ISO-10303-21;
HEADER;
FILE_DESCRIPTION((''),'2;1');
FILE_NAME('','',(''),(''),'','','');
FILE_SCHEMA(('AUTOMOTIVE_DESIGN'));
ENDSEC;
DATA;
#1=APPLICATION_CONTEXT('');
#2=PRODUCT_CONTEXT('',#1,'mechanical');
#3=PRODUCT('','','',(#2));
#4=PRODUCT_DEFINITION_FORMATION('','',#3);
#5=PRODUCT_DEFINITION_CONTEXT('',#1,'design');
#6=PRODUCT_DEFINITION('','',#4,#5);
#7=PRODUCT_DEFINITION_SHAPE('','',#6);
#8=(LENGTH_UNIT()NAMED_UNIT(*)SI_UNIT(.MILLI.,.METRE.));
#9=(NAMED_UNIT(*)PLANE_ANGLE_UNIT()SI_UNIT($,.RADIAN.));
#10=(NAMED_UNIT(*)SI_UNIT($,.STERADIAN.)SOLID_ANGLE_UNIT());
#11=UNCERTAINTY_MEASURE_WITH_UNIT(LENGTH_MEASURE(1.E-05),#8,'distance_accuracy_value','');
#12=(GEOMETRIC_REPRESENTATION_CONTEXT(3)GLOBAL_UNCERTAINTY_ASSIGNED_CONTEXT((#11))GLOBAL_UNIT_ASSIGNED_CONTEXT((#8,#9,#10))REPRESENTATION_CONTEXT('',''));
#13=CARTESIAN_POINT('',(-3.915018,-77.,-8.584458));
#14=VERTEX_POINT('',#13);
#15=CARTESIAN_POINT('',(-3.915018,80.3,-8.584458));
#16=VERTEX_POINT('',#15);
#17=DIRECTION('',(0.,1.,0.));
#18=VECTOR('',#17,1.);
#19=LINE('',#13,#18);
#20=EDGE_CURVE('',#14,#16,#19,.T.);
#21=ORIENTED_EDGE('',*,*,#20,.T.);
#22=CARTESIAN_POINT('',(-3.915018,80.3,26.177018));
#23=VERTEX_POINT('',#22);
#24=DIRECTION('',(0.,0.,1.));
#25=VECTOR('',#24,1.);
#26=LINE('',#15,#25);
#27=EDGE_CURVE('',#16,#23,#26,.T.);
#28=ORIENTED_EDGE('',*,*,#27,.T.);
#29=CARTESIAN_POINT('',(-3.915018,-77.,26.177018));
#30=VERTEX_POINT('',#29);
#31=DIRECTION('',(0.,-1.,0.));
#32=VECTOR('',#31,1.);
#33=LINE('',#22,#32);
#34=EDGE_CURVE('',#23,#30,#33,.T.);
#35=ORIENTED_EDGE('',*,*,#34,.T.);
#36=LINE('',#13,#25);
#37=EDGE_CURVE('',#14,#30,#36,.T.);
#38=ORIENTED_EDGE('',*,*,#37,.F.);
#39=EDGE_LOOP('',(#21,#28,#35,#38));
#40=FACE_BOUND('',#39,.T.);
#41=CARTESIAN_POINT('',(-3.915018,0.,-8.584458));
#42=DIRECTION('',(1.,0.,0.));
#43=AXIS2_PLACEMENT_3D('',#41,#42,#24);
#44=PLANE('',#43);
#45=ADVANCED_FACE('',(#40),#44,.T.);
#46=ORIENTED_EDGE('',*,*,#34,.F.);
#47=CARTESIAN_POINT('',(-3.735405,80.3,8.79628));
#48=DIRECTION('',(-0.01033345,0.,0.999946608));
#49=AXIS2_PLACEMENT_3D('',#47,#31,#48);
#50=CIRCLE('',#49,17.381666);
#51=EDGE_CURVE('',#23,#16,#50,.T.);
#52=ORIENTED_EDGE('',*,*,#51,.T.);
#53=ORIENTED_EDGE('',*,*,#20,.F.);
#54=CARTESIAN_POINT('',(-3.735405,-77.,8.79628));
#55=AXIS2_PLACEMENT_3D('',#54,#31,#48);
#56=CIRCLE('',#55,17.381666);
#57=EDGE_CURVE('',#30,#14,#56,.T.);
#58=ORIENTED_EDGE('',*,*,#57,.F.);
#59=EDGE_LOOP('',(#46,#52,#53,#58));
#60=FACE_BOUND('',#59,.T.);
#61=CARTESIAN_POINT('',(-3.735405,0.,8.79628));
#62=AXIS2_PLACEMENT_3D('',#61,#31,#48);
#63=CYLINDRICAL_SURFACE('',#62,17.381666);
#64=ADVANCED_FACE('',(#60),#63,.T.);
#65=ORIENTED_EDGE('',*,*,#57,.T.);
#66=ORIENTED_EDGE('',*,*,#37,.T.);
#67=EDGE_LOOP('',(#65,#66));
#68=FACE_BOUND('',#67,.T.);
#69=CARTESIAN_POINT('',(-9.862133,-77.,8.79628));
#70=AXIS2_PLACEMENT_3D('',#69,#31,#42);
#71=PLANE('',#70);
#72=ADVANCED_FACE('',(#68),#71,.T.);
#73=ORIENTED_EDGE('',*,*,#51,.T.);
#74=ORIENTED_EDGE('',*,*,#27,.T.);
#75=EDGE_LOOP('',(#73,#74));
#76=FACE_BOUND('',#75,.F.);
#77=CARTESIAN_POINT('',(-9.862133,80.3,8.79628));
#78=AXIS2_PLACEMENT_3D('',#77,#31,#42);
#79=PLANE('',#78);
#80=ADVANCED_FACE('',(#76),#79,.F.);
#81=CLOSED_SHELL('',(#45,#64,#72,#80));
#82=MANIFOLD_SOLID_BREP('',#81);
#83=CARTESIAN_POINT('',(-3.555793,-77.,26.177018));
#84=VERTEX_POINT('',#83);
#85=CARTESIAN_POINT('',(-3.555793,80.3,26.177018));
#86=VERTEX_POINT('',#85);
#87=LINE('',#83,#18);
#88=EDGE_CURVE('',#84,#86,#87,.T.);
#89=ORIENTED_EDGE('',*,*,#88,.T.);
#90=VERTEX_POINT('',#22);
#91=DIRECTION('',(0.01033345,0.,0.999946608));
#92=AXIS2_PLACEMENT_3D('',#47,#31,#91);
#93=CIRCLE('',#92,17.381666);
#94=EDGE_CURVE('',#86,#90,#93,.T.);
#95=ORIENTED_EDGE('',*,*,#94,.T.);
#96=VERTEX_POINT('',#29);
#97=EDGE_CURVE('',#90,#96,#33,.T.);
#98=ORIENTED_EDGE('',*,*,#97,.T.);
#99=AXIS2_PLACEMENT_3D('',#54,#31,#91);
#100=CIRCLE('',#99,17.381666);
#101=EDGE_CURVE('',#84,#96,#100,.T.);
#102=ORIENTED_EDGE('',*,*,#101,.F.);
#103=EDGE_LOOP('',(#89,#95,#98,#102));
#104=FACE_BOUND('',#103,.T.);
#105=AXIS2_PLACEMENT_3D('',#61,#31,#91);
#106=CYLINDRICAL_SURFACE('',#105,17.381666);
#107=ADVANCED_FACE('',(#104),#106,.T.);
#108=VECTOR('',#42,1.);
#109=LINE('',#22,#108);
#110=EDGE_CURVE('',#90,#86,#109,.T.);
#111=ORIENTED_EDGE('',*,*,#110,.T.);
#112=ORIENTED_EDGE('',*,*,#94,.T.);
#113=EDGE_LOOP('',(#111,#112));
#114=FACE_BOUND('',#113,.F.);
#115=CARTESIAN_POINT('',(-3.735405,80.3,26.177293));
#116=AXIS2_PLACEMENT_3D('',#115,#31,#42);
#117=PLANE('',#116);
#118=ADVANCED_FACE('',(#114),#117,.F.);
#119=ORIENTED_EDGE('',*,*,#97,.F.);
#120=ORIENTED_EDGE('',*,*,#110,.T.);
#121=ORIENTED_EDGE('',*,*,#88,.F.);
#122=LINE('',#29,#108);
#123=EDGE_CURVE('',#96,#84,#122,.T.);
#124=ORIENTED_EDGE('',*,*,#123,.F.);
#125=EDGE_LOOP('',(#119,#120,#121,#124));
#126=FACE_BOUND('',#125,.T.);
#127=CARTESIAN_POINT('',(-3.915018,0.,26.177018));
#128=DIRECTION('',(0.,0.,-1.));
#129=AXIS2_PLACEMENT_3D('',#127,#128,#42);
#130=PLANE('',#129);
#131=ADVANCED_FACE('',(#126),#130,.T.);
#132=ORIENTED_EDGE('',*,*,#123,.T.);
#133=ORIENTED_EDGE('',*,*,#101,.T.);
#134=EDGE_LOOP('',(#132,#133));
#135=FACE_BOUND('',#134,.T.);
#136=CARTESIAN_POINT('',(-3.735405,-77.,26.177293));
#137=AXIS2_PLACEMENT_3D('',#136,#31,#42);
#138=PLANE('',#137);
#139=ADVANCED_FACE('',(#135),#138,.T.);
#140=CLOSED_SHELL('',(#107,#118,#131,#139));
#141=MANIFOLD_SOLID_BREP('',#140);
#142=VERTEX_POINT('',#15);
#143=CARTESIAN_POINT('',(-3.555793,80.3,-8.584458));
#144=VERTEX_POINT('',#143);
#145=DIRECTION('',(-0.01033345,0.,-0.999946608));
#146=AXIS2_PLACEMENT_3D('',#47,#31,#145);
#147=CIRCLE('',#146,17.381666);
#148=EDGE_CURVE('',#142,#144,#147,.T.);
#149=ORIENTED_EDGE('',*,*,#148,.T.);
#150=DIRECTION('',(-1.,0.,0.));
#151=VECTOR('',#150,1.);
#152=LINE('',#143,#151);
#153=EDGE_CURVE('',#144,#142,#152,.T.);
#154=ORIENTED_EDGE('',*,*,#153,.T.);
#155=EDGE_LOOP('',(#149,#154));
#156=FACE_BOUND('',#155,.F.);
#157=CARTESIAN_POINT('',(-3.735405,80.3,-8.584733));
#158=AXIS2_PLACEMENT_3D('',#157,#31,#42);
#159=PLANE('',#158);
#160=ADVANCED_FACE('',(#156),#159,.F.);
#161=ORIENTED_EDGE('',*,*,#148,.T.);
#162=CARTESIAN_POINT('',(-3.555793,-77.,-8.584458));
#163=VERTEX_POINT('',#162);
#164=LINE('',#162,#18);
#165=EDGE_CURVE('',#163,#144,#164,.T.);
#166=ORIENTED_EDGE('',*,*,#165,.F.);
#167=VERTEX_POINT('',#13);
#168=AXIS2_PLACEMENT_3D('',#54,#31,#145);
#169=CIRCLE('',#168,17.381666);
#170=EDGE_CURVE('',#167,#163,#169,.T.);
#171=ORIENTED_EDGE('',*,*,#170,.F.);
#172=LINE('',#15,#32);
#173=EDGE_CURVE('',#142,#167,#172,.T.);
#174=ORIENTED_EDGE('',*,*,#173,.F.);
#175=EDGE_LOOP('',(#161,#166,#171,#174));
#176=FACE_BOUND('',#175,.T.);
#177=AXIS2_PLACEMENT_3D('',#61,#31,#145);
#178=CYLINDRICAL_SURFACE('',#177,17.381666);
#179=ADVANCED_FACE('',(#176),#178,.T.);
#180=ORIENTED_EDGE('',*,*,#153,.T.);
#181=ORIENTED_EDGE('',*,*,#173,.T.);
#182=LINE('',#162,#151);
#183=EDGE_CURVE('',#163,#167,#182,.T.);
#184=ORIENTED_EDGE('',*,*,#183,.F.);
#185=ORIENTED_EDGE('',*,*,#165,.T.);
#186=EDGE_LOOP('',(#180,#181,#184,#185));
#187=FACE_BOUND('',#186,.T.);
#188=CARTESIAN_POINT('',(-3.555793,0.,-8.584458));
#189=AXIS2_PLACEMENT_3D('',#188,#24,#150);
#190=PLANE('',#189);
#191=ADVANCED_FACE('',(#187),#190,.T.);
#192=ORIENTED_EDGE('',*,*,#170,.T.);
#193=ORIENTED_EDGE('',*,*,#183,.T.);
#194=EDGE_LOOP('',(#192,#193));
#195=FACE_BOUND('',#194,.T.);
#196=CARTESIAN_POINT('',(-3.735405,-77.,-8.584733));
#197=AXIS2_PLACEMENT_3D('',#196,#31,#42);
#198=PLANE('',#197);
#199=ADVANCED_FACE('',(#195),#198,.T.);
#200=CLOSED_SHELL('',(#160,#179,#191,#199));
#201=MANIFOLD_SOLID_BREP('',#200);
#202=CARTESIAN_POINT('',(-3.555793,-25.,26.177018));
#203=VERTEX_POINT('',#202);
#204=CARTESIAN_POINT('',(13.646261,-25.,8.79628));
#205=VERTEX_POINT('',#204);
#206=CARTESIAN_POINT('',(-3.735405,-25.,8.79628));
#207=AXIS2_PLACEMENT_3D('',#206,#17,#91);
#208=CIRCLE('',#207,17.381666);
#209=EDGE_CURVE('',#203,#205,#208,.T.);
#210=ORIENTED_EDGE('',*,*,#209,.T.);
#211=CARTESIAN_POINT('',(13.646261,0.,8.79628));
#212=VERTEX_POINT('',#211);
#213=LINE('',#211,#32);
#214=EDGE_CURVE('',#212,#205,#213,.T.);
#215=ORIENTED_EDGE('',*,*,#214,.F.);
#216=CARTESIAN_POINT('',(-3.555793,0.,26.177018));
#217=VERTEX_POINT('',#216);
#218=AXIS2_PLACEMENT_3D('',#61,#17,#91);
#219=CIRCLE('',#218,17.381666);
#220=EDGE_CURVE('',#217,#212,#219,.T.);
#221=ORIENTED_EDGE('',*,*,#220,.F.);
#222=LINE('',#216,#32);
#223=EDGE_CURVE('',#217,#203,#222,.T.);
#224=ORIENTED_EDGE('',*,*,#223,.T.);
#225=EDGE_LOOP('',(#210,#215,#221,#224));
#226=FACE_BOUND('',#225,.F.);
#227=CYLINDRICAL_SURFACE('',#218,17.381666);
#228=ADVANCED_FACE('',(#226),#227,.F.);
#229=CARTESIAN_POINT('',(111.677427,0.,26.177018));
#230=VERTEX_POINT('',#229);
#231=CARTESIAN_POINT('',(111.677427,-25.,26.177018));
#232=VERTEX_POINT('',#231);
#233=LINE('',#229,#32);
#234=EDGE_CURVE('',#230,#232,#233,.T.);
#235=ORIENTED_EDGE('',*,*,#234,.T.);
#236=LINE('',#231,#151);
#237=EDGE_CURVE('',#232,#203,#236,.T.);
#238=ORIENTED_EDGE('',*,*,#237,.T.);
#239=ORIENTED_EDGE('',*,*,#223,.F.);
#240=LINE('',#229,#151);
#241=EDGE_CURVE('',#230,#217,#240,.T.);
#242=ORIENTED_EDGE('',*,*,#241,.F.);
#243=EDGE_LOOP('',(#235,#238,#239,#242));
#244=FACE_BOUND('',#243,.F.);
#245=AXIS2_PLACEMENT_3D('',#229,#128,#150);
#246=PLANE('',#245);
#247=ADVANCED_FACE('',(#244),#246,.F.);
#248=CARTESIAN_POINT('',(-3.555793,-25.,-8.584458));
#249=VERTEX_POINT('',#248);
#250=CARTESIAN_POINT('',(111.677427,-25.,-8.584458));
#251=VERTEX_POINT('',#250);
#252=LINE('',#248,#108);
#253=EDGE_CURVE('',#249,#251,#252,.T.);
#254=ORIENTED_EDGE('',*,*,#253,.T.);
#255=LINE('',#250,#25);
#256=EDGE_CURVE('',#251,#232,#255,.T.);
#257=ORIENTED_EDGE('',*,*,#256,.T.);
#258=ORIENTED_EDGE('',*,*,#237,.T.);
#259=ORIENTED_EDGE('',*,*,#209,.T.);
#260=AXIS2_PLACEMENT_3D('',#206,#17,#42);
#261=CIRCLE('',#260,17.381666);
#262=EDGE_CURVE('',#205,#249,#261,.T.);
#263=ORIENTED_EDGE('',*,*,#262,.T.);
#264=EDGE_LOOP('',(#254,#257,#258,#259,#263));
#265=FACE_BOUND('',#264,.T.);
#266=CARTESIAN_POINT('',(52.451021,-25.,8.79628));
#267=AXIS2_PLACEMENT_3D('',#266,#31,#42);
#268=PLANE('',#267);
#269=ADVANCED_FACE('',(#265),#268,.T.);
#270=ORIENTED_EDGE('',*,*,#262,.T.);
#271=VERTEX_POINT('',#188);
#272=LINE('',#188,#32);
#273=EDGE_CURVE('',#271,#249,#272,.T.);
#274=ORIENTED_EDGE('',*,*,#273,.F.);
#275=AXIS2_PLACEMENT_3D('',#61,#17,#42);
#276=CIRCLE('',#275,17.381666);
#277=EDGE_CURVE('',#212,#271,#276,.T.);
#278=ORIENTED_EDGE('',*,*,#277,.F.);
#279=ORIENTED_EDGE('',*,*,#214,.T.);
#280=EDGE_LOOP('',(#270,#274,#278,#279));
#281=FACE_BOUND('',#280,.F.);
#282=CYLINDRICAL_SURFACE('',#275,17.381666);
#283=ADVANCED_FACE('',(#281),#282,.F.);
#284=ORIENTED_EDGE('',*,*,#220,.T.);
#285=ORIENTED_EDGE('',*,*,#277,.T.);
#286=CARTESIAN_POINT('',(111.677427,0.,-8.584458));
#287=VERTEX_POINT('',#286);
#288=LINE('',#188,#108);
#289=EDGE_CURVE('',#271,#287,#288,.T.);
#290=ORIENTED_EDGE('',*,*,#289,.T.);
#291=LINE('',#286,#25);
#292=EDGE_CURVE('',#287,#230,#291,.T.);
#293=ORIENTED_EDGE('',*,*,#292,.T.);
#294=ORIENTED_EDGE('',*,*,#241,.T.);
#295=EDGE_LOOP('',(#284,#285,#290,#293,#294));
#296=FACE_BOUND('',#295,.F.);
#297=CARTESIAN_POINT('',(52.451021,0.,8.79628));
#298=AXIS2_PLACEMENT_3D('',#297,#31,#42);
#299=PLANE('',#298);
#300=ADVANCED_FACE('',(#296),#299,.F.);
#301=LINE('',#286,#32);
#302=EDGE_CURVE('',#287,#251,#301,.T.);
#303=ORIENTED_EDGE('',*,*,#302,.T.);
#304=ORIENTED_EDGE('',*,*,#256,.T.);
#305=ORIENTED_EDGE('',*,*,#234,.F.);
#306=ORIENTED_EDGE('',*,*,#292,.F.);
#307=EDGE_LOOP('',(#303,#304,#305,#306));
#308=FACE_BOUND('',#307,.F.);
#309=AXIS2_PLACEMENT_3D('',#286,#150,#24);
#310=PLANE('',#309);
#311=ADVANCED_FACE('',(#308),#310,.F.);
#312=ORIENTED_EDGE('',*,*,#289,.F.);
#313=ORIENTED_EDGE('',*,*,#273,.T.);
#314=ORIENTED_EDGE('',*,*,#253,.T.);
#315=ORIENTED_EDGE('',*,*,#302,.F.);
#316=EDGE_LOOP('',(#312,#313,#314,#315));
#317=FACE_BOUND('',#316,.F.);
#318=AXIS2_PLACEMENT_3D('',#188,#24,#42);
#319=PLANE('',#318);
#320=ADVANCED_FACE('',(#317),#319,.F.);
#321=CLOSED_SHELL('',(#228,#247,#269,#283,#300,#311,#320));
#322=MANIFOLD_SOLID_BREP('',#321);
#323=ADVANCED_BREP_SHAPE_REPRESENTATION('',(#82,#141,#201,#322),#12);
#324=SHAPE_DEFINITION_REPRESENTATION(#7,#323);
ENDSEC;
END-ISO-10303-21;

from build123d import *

# Parameters (mm, degrees)
F1_DEPTH      = 77
F1_DEPTH_BACK = 80.3
F2_DEPTH      = 25


with BuildPart() as f1:
    # F0 (on Front) → F1 (new body, two sides)
    with BuildSketch(Plane.XZ) as f1_sk:
        with BuildLine():
            Line((-3.9150179645, -8.5844577717), (-3.9150179645, 26.1770182716))
            ThreePointArc((-3.9150179645, 26.1770182716), (-21.1170714481, 8.79628025), (-3.9150179645, -8.5844577717))
        make_face()
    extrude(amount=F1_DEPTH)
    extrude(f1_sk.sketch, amount=-F1_DEPTH_BACK)


with BuildPart() as f1b:
    # F0 (on Front) → F1, piece 2 (new body, two sides)
    with BuildSketch(Plane.XZ) as f1_2_sk:
        with BuildLine():
            ThreePointArc((-3.5557928214, 26.1770182716), (-3.7354053929, 26.1779463051), (-3.9150179645, 26.1770182716))
            Line((-3.9150179645, 26.1770182716), (-3.5557928214, 26.1770182716))
        make_face()
    extrude(amount=F1_DEPTH)
    extrude(f1_2_sk.sketch, amount=-F1_DEPTH_BACK)


with BuildPart() as f1c:
    # F0 (on Front) → F1, piece 3 (new body, two sides)
    with BuildSketch(Plane.XZ) as f1_3_sk:
        with BuildLine():
            Line((-3.5557928214, -8.5844577717), (-3.9150179645, -8.5844577717))
            ThreePointArc((-3.9150179645, -8.5844577717), (-3.7354053929, -8.5853858052), (-3.5557928214, -8.5844577717))
        make_face()
    extrude(amount=F1_DEPTH)
    extrude(f1_3_sk.sketch, amount=-F1_DEPTH_BACK)


with BuildPart() as f2:
    # F0 (on Front) → F2 (new body)
    with BuildSketch(Plane.XZ):
        with BuildLine():
            Line((111.6774268448, 26.1770182716), (-3.5557928214, 26.1770182716))
            ThreePointArc((-3.5557928214, 26.1770182716), (8.6186279685, 21.0233066488), (13.6462606622, 8.79628025))
            ThreePointArc((13.6462606622, 8.79628025), (8.6186279685, -3.4307461489), (-3.5557928214, -8.5844577717))
            Line((-3.5557928214, -8.5844577717), (111.6774268448, -8.5844577717))
            Line((111.6774268448, -8.5844577717), (111.6774268448, 26.1770182716))
        make_face()
    extrude(amount=F2_DEPTH)


solid = Compound([f1.part, f1b.part, f1c.part, f2.part])
